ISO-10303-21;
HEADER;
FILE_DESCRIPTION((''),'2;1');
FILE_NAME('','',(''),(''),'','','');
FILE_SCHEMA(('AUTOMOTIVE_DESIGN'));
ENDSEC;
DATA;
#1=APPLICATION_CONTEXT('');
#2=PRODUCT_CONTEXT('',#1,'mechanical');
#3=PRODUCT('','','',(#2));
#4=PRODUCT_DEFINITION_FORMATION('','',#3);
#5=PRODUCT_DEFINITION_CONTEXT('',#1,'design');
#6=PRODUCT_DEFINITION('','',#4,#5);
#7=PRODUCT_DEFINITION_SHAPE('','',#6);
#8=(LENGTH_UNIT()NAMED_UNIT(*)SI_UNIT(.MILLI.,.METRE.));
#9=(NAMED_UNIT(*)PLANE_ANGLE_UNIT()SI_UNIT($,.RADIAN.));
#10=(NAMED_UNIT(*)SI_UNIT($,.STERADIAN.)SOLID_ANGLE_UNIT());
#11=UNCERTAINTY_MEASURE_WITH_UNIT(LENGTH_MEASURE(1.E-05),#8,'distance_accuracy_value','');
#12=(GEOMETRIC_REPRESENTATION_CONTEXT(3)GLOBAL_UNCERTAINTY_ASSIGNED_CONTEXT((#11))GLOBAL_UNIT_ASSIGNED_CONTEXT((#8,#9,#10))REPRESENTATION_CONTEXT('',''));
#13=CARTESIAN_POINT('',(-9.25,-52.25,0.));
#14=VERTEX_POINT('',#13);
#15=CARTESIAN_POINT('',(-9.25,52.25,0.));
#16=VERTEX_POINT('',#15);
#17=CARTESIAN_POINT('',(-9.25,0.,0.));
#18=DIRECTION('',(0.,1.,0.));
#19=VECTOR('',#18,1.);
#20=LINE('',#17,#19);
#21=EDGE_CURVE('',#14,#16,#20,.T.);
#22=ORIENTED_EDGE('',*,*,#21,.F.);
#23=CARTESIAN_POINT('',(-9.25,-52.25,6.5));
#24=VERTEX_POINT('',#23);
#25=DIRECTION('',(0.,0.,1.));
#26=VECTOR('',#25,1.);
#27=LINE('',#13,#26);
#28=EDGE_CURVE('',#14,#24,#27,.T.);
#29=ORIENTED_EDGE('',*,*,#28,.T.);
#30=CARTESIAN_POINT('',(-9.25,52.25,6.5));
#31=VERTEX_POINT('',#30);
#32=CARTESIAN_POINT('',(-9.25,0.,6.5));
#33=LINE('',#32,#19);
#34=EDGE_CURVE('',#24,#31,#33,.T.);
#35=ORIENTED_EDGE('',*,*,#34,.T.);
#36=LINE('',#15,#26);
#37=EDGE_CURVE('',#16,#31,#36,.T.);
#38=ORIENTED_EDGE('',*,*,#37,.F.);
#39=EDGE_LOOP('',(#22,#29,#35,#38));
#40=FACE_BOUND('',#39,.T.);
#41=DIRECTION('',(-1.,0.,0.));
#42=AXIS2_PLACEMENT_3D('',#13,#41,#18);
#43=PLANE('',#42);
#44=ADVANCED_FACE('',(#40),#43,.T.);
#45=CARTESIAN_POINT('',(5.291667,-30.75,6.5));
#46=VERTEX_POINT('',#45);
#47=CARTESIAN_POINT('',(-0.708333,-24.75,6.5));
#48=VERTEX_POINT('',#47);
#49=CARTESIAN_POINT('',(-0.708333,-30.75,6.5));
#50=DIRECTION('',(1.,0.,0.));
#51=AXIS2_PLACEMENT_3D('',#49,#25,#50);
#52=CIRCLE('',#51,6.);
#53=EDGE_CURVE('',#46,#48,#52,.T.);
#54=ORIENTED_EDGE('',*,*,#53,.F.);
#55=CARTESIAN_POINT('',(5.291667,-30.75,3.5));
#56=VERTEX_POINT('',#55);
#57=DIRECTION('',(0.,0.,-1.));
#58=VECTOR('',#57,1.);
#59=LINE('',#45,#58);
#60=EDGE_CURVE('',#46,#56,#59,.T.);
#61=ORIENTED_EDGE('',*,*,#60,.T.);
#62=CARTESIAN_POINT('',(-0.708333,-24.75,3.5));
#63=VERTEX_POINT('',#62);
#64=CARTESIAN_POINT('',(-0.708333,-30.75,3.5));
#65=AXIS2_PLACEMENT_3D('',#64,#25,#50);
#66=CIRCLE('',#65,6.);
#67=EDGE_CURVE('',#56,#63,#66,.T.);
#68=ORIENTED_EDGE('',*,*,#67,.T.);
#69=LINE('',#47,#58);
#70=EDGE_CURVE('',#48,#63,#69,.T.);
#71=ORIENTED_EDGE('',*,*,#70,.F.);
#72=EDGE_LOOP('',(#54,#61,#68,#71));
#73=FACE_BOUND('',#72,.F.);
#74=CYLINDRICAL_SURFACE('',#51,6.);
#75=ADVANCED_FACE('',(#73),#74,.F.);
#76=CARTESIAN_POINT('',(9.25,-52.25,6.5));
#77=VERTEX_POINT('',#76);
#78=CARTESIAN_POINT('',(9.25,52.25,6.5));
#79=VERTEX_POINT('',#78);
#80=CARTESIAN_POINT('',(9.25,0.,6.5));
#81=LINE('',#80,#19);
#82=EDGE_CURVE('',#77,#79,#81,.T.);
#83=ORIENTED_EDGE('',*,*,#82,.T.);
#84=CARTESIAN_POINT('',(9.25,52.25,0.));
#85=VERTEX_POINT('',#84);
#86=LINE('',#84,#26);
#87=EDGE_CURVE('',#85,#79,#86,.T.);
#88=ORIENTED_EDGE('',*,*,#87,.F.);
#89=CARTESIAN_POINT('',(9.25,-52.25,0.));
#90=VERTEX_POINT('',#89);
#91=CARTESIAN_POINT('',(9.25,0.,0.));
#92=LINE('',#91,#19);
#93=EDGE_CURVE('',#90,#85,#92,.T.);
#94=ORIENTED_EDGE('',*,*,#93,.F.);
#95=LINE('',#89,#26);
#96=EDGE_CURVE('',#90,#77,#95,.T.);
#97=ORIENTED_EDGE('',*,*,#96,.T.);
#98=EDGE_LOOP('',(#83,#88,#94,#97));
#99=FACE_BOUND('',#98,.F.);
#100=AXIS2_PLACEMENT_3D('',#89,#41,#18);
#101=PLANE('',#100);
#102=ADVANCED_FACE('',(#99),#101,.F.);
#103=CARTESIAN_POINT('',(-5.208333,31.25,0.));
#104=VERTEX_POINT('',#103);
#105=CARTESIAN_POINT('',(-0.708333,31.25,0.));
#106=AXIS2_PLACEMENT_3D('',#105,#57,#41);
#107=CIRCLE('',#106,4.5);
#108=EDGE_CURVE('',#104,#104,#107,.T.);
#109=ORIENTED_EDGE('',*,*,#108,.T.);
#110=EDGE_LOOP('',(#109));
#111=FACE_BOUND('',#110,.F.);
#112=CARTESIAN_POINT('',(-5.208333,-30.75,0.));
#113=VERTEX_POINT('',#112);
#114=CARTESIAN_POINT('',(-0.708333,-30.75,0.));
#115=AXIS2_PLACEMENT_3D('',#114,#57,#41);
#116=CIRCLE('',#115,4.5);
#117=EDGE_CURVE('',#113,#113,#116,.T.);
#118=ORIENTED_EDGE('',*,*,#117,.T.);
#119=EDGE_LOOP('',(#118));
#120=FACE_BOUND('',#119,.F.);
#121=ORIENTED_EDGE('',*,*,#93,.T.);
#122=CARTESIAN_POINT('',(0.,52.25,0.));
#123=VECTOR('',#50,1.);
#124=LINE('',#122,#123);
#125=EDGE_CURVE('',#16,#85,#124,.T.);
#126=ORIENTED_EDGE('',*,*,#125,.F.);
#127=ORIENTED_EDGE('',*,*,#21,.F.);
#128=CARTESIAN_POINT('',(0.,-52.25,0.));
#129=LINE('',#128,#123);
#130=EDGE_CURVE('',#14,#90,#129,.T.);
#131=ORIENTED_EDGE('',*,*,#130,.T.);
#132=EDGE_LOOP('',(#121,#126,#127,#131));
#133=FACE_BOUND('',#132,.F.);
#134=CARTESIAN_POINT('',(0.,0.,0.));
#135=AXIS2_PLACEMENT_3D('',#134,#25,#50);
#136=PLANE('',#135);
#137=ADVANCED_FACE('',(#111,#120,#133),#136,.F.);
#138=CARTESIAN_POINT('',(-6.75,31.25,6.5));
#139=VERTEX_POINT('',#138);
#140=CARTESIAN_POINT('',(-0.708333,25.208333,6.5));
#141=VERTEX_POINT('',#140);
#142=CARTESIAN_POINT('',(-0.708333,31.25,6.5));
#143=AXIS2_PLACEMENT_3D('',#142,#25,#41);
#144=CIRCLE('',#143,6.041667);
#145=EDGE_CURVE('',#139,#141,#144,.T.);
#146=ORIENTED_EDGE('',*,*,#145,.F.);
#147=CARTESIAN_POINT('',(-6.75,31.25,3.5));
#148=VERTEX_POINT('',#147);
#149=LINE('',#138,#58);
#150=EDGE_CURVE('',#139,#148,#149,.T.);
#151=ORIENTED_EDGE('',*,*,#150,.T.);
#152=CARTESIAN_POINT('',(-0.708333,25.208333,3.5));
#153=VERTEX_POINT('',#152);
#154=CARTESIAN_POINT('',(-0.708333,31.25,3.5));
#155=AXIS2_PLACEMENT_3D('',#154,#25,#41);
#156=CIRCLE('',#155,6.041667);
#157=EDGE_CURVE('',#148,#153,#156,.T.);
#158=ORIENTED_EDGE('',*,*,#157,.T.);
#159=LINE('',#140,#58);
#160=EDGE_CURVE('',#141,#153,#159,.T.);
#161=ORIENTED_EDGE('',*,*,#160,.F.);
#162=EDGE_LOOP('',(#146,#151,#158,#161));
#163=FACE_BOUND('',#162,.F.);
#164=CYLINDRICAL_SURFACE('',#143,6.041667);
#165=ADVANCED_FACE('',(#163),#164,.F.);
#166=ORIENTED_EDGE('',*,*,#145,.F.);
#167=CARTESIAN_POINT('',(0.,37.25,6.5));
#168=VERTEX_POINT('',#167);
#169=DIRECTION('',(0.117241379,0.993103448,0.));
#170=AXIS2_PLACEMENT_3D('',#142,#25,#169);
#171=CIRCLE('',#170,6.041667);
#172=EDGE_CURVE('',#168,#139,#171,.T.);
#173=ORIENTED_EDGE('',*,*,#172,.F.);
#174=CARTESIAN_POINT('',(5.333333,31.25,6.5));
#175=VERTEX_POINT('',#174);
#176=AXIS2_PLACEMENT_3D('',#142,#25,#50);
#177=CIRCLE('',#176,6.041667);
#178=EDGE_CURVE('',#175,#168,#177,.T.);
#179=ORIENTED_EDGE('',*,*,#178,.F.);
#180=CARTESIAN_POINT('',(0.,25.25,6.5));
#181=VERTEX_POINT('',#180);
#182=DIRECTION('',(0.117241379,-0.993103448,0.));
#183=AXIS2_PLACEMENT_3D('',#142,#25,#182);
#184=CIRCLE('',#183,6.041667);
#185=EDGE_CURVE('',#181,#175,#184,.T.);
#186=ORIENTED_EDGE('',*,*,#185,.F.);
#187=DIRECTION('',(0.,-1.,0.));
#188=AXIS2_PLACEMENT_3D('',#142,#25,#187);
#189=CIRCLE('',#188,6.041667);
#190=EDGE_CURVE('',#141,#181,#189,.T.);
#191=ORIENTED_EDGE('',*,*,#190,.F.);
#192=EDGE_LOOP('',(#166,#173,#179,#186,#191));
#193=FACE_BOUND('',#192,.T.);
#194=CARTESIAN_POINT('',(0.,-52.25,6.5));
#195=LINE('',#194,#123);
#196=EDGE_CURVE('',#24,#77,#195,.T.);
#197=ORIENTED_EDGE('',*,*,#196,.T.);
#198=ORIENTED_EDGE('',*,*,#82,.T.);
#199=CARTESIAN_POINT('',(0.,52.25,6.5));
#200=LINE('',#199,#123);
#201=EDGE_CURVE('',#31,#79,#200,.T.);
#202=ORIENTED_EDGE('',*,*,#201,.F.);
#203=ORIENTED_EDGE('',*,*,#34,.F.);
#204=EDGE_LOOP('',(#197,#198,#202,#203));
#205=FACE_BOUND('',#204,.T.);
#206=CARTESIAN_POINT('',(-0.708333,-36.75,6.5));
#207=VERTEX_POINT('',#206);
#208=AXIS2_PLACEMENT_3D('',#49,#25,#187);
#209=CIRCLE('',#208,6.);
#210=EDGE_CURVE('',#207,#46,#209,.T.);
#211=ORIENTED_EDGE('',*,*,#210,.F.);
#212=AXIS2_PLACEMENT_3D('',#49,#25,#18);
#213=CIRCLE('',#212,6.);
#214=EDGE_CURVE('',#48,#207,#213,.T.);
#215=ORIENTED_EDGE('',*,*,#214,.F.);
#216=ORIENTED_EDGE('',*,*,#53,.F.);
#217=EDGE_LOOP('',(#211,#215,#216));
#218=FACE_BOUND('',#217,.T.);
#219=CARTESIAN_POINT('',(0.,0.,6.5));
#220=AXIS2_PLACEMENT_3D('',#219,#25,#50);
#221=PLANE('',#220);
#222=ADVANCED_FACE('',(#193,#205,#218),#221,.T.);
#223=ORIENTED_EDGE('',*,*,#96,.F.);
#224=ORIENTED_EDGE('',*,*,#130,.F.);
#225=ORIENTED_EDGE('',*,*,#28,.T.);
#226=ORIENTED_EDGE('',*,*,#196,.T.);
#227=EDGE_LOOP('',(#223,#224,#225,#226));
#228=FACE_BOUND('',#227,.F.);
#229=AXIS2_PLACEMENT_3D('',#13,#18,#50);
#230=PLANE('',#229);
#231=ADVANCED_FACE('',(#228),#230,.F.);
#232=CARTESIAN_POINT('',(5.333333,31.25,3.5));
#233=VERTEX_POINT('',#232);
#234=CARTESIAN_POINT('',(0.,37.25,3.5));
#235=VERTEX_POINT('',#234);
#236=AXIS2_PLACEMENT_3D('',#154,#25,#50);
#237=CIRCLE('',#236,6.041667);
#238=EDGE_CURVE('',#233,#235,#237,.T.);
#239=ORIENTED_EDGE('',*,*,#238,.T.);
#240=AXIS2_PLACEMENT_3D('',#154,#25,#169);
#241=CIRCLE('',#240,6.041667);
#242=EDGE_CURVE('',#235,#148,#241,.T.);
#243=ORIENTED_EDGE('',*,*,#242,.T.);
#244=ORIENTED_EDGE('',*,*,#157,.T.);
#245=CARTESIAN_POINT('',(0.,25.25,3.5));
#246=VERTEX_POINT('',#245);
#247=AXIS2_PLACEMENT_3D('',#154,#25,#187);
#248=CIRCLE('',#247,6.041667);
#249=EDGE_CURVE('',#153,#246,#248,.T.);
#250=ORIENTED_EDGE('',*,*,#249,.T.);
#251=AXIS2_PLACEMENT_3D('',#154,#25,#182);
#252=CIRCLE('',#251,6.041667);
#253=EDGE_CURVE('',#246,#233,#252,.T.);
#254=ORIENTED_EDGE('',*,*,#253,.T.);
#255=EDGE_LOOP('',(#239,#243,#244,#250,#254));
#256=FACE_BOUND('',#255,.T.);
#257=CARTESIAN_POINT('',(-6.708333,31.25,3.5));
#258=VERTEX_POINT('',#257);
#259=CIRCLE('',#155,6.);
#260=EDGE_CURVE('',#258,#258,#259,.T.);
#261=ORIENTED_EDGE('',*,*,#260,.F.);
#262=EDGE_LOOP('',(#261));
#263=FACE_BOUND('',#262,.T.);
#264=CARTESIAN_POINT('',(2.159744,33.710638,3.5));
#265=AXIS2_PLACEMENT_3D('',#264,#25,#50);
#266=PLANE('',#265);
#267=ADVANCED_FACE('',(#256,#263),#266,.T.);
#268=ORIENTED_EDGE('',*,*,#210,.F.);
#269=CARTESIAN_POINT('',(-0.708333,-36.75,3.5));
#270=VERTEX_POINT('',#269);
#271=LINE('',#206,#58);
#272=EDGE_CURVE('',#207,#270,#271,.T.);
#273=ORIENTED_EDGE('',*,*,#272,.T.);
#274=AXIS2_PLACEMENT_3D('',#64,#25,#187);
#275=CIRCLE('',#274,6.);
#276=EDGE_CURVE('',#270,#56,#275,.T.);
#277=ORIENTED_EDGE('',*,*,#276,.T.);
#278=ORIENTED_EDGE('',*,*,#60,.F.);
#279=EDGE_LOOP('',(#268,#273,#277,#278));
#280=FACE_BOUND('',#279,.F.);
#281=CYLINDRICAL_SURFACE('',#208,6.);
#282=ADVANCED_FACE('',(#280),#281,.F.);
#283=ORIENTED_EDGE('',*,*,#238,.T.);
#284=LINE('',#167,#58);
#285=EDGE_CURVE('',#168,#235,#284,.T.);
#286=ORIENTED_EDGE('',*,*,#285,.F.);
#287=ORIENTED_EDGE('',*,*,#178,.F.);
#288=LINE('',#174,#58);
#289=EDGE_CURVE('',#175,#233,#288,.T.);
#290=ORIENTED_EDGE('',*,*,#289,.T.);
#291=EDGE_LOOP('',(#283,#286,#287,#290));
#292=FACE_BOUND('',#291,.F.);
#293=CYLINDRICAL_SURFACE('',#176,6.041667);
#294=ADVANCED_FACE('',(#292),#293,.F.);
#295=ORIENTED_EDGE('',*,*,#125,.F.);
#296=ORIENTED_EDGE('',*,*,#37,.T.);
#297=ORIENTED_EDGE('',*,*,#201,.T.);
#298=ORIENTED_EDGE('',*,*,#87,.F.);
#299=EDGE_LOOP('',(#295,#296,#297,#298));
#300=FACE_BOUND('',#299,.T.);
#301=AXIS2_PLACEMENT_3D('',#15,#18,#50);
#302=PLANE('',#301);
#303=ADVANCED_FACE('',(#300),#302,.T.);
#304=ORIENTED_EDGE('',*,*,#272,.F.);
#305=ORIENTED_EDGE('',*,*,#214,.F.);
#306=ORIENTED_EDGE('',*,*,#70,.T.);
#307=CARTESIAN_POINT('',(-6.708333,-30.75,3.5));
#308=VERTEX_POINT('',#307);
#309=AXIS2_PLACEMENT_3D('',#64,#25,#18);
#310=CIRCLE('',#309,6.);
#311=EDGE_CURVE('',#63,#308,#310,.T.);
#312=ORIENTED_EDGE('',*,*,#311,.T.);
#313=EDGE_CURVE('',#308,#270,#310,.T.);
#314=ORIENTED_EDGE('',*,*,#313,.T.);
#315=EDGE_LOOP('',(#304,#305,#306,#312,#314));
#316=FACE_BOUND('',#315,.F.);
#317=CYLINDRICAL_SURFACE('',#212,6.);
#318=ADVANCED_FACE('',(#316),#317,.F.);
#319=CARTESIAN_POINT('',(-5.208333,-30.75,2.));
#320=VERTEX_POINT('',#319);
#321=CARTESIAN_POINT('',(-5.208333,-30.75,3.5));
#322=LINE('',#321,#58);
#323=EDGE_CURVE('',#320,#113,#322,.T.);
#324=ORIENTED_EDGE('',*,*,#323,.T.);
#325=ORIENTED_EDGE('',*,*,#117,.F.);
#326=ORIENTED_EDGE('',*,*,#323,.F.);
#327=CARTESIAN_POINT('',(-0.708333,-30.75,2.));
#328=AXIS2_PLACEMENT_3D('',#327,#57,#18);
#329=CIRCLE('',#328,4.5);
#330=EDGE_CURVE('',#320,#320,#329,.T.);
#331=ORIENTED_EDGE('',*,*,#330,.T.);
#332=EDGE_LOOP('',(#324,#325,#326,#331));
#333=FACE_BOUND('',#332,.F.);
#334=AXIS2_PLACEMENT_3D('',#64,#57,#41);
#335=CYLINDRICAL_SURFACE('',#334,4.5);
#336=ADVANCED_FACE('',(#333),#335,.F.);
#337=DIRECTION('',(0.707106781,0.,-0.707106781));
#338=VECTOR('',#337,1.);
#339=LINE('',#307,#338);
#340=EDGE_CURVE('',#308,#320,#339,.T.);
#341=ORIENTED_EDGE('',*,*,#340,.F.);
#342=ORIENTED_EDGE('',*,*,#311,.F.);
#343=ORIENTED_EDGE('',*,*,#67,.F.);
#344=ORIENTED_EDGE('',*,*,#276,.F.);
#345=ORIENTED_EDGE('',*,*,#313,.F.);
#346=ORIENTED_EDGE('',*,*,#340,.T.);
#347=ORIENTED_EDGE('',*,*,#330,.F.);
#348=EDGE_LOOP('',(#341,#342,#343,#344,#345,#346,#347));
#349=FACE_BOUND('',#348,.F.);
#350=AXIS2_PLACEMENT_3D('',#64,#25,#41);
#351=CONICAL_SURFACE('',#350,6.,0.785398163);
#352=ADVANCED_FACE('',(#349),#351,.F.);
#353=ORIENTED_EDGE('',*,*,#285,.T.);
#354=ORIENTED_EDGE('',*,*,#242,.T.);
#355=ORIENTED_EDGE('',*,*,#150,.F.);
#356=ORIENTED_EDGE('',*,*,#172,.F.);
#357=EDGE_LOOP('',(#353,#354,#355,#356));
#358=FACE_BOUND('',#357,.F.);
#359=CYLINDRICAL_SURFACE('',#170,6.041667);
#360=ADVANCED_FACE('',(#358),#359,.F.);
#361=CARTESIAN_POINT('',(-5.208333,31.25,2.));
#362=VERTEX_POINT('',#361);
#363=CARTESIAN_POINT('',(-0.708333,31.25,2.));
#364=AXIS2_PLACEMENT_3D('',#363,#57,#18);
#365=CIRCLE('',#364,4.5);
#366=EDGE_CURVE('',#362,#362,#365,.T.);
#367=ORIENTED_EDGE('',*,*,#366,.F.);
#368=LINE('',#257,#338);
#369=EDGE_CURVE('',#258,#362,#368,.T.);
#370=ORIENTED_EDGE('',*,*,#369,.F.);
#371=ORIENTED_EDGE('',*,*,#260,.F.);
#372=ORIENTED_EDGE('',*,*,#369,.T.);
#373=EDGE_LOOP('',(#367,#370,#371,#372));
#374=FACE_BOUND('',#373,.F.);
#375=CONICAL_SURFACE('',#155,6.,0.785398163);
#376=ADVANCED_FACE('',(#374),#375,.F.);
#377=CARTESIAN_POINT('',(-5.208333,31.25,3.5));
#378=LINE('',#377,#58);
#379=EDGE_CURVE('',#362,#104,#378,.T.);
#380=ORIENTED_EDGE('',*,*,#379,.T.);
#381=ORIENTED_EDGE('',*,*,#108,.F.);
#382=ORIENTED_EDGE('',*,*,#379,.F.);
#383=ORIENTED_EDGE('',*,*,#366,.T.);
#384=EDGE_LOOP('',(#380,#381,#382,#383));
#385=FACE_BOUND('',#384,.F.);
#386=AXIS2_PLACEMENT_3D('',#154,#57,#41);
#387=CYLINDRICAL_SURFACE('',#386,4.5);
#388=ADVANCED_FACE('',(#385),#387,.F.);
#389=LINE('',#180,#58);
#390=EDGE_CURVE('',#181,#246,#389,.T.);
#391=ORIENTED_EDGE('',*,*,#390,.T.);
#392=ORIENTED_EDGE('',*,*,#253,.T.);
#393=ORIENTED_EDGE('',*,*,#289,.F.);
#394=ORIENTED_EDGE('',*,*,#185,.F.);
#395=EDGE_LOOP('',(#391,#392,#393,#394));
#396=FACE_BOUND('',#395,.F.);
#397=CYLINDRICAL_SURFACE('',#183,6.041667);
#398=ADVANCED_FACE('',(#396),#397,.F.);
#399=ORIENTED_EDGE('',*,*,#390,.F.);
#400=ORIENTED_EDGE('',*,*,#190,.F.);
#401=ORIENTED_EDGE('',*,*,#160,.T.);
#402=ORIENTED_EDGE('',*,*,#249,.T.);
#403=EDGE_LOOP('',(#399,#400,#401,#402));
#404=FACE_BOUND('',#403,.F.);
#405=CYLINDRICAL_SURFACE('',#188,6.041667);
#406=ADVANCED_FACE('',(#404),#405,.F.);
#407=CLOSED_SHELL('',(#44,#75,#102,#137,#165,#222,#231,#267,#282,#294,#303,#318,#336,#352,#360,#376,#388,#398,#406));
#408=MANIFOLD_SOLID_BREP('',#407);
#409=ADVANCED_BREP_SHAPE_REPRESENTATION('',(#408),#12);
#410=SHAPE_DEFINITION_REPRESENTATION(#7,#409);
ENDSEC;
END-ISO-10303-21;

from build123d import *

# Parameters (mm, degrees)
F0_W           = 18.5
F0_H           = 104.5
F1_DEPTH       = 6.5
F3_DEPTH       = 3
F5_D           = 9
F5_CSINK_D     = 12
F5_CSINK_ANGLE = 90
F7_D           = 9
F7_CSINK_D     = 12
F7_CSINK_ANGLE = 90


with BuildPart() as f1:
    # F0 (on Top) → F1 (new body)
    with BuildSketch(Plane.XY):
        Rectangle(F0_W, F0_H)
    extrude(amount=F1_DEPTH)

    # F2 (on face) → F3 (cut)
    with BuildSketch(Plane.XY.offset(6.5)):
        with BuildLine():
            ThreePointArc((5.3333333333, 31.25), (3.8072646337, 35.2638648596), (0, 37.25))
            Line((0, 37.25), (0, 31.25))
            Line((0, 31.25), (5.3333333333, 31.25))
        make_face()
        with BuildLine():
            Line((0, 31.25), (0, 37.25))
            ThreePointArc((0, 37.25), (-4.7221981929, 35.765597967), (-6.75, 31.25))
            Line((-6.75, 31.25), (-0.7083333333, 31.25))
            Line((-0.7083333333, 31.25), (0, 31.25))
        make_face()
        with BuildLine():
            Line((5.3333333333, 31.25), (0, 31.25))
            Line((0, 31.25), (0, 25.25))
            ThreePointArc((0, 25.25), (3.8072646337, 27.2361351404), (5.3333333333, 31.25))
        make_face()
        with BuildLine():
            Line((0, 25.25), (0, 31.25))
            Line((0, 31.25), (-0.7083333333, 31.25))
            Line((-0.7083333333, 31.25), (-0.7083333333, 25.2083333333))
            ThreePointArc((-0.7083333333, 25.2083333333), (-0.3535544507, 25.2187589954), (0, 25.25))
        make_face()
        with BuildLine():
            Line((-0.7083333333, 31.25), (-6.75, 31.25))
            ThreePointArc((-6.75, 31.25), (-4.980436803, 26.9778965303), (-0.7083333333, 25.2083333333))
            Line((-0.7083333333, 25.2083333333), (-0.7083333333, 31.25))
        make_face()
        with BuildLine():
            ThreePointArc((5.2916666667, -30.75), (3.5343073538, -26.5073593129), (-0.7083333333, -24.75))
            Line((-0.7083333333, -24.75), (-0.7083333333, -36.75))
            ThreePointArc((-0.7083333333, -36.75), (3.5343073538, -34.9926406871), (5.2916666667, -30.75))
        make_face()
        with BuildLine():
            Line((-0.7083333333, -36.75), (-0.7083333333, -24.75))
            ThreePointArc((-0.7083333333, -24.75), (-6.7083333333, -30.75), (-0.7083333333, -36.75))
        make_face()
    extrude(amount=-F3_DEPTH, mode=Mode.SUBTRACT)

    # F5 (through all)
    with Locations(Plane.XY.offset(3.5)):
        with Locations((-0.7083333333, 31.25)):
            CounterSinkHole(F5_D / 2, F5_CSINK_D / 2, counter_sink_angle=F5_CSINK_ANGLE)

    # F7 (through all)
    with Locations(Plane.XY.offset(3.5)):
        with Locations((-0.7083333333, -30.75)):
            CounterSinkHole(F7_D / 2, F7_CSINK_D / 2, counter_sink_angle=F7_CSINK_ANGLE)


solid = f1.part
